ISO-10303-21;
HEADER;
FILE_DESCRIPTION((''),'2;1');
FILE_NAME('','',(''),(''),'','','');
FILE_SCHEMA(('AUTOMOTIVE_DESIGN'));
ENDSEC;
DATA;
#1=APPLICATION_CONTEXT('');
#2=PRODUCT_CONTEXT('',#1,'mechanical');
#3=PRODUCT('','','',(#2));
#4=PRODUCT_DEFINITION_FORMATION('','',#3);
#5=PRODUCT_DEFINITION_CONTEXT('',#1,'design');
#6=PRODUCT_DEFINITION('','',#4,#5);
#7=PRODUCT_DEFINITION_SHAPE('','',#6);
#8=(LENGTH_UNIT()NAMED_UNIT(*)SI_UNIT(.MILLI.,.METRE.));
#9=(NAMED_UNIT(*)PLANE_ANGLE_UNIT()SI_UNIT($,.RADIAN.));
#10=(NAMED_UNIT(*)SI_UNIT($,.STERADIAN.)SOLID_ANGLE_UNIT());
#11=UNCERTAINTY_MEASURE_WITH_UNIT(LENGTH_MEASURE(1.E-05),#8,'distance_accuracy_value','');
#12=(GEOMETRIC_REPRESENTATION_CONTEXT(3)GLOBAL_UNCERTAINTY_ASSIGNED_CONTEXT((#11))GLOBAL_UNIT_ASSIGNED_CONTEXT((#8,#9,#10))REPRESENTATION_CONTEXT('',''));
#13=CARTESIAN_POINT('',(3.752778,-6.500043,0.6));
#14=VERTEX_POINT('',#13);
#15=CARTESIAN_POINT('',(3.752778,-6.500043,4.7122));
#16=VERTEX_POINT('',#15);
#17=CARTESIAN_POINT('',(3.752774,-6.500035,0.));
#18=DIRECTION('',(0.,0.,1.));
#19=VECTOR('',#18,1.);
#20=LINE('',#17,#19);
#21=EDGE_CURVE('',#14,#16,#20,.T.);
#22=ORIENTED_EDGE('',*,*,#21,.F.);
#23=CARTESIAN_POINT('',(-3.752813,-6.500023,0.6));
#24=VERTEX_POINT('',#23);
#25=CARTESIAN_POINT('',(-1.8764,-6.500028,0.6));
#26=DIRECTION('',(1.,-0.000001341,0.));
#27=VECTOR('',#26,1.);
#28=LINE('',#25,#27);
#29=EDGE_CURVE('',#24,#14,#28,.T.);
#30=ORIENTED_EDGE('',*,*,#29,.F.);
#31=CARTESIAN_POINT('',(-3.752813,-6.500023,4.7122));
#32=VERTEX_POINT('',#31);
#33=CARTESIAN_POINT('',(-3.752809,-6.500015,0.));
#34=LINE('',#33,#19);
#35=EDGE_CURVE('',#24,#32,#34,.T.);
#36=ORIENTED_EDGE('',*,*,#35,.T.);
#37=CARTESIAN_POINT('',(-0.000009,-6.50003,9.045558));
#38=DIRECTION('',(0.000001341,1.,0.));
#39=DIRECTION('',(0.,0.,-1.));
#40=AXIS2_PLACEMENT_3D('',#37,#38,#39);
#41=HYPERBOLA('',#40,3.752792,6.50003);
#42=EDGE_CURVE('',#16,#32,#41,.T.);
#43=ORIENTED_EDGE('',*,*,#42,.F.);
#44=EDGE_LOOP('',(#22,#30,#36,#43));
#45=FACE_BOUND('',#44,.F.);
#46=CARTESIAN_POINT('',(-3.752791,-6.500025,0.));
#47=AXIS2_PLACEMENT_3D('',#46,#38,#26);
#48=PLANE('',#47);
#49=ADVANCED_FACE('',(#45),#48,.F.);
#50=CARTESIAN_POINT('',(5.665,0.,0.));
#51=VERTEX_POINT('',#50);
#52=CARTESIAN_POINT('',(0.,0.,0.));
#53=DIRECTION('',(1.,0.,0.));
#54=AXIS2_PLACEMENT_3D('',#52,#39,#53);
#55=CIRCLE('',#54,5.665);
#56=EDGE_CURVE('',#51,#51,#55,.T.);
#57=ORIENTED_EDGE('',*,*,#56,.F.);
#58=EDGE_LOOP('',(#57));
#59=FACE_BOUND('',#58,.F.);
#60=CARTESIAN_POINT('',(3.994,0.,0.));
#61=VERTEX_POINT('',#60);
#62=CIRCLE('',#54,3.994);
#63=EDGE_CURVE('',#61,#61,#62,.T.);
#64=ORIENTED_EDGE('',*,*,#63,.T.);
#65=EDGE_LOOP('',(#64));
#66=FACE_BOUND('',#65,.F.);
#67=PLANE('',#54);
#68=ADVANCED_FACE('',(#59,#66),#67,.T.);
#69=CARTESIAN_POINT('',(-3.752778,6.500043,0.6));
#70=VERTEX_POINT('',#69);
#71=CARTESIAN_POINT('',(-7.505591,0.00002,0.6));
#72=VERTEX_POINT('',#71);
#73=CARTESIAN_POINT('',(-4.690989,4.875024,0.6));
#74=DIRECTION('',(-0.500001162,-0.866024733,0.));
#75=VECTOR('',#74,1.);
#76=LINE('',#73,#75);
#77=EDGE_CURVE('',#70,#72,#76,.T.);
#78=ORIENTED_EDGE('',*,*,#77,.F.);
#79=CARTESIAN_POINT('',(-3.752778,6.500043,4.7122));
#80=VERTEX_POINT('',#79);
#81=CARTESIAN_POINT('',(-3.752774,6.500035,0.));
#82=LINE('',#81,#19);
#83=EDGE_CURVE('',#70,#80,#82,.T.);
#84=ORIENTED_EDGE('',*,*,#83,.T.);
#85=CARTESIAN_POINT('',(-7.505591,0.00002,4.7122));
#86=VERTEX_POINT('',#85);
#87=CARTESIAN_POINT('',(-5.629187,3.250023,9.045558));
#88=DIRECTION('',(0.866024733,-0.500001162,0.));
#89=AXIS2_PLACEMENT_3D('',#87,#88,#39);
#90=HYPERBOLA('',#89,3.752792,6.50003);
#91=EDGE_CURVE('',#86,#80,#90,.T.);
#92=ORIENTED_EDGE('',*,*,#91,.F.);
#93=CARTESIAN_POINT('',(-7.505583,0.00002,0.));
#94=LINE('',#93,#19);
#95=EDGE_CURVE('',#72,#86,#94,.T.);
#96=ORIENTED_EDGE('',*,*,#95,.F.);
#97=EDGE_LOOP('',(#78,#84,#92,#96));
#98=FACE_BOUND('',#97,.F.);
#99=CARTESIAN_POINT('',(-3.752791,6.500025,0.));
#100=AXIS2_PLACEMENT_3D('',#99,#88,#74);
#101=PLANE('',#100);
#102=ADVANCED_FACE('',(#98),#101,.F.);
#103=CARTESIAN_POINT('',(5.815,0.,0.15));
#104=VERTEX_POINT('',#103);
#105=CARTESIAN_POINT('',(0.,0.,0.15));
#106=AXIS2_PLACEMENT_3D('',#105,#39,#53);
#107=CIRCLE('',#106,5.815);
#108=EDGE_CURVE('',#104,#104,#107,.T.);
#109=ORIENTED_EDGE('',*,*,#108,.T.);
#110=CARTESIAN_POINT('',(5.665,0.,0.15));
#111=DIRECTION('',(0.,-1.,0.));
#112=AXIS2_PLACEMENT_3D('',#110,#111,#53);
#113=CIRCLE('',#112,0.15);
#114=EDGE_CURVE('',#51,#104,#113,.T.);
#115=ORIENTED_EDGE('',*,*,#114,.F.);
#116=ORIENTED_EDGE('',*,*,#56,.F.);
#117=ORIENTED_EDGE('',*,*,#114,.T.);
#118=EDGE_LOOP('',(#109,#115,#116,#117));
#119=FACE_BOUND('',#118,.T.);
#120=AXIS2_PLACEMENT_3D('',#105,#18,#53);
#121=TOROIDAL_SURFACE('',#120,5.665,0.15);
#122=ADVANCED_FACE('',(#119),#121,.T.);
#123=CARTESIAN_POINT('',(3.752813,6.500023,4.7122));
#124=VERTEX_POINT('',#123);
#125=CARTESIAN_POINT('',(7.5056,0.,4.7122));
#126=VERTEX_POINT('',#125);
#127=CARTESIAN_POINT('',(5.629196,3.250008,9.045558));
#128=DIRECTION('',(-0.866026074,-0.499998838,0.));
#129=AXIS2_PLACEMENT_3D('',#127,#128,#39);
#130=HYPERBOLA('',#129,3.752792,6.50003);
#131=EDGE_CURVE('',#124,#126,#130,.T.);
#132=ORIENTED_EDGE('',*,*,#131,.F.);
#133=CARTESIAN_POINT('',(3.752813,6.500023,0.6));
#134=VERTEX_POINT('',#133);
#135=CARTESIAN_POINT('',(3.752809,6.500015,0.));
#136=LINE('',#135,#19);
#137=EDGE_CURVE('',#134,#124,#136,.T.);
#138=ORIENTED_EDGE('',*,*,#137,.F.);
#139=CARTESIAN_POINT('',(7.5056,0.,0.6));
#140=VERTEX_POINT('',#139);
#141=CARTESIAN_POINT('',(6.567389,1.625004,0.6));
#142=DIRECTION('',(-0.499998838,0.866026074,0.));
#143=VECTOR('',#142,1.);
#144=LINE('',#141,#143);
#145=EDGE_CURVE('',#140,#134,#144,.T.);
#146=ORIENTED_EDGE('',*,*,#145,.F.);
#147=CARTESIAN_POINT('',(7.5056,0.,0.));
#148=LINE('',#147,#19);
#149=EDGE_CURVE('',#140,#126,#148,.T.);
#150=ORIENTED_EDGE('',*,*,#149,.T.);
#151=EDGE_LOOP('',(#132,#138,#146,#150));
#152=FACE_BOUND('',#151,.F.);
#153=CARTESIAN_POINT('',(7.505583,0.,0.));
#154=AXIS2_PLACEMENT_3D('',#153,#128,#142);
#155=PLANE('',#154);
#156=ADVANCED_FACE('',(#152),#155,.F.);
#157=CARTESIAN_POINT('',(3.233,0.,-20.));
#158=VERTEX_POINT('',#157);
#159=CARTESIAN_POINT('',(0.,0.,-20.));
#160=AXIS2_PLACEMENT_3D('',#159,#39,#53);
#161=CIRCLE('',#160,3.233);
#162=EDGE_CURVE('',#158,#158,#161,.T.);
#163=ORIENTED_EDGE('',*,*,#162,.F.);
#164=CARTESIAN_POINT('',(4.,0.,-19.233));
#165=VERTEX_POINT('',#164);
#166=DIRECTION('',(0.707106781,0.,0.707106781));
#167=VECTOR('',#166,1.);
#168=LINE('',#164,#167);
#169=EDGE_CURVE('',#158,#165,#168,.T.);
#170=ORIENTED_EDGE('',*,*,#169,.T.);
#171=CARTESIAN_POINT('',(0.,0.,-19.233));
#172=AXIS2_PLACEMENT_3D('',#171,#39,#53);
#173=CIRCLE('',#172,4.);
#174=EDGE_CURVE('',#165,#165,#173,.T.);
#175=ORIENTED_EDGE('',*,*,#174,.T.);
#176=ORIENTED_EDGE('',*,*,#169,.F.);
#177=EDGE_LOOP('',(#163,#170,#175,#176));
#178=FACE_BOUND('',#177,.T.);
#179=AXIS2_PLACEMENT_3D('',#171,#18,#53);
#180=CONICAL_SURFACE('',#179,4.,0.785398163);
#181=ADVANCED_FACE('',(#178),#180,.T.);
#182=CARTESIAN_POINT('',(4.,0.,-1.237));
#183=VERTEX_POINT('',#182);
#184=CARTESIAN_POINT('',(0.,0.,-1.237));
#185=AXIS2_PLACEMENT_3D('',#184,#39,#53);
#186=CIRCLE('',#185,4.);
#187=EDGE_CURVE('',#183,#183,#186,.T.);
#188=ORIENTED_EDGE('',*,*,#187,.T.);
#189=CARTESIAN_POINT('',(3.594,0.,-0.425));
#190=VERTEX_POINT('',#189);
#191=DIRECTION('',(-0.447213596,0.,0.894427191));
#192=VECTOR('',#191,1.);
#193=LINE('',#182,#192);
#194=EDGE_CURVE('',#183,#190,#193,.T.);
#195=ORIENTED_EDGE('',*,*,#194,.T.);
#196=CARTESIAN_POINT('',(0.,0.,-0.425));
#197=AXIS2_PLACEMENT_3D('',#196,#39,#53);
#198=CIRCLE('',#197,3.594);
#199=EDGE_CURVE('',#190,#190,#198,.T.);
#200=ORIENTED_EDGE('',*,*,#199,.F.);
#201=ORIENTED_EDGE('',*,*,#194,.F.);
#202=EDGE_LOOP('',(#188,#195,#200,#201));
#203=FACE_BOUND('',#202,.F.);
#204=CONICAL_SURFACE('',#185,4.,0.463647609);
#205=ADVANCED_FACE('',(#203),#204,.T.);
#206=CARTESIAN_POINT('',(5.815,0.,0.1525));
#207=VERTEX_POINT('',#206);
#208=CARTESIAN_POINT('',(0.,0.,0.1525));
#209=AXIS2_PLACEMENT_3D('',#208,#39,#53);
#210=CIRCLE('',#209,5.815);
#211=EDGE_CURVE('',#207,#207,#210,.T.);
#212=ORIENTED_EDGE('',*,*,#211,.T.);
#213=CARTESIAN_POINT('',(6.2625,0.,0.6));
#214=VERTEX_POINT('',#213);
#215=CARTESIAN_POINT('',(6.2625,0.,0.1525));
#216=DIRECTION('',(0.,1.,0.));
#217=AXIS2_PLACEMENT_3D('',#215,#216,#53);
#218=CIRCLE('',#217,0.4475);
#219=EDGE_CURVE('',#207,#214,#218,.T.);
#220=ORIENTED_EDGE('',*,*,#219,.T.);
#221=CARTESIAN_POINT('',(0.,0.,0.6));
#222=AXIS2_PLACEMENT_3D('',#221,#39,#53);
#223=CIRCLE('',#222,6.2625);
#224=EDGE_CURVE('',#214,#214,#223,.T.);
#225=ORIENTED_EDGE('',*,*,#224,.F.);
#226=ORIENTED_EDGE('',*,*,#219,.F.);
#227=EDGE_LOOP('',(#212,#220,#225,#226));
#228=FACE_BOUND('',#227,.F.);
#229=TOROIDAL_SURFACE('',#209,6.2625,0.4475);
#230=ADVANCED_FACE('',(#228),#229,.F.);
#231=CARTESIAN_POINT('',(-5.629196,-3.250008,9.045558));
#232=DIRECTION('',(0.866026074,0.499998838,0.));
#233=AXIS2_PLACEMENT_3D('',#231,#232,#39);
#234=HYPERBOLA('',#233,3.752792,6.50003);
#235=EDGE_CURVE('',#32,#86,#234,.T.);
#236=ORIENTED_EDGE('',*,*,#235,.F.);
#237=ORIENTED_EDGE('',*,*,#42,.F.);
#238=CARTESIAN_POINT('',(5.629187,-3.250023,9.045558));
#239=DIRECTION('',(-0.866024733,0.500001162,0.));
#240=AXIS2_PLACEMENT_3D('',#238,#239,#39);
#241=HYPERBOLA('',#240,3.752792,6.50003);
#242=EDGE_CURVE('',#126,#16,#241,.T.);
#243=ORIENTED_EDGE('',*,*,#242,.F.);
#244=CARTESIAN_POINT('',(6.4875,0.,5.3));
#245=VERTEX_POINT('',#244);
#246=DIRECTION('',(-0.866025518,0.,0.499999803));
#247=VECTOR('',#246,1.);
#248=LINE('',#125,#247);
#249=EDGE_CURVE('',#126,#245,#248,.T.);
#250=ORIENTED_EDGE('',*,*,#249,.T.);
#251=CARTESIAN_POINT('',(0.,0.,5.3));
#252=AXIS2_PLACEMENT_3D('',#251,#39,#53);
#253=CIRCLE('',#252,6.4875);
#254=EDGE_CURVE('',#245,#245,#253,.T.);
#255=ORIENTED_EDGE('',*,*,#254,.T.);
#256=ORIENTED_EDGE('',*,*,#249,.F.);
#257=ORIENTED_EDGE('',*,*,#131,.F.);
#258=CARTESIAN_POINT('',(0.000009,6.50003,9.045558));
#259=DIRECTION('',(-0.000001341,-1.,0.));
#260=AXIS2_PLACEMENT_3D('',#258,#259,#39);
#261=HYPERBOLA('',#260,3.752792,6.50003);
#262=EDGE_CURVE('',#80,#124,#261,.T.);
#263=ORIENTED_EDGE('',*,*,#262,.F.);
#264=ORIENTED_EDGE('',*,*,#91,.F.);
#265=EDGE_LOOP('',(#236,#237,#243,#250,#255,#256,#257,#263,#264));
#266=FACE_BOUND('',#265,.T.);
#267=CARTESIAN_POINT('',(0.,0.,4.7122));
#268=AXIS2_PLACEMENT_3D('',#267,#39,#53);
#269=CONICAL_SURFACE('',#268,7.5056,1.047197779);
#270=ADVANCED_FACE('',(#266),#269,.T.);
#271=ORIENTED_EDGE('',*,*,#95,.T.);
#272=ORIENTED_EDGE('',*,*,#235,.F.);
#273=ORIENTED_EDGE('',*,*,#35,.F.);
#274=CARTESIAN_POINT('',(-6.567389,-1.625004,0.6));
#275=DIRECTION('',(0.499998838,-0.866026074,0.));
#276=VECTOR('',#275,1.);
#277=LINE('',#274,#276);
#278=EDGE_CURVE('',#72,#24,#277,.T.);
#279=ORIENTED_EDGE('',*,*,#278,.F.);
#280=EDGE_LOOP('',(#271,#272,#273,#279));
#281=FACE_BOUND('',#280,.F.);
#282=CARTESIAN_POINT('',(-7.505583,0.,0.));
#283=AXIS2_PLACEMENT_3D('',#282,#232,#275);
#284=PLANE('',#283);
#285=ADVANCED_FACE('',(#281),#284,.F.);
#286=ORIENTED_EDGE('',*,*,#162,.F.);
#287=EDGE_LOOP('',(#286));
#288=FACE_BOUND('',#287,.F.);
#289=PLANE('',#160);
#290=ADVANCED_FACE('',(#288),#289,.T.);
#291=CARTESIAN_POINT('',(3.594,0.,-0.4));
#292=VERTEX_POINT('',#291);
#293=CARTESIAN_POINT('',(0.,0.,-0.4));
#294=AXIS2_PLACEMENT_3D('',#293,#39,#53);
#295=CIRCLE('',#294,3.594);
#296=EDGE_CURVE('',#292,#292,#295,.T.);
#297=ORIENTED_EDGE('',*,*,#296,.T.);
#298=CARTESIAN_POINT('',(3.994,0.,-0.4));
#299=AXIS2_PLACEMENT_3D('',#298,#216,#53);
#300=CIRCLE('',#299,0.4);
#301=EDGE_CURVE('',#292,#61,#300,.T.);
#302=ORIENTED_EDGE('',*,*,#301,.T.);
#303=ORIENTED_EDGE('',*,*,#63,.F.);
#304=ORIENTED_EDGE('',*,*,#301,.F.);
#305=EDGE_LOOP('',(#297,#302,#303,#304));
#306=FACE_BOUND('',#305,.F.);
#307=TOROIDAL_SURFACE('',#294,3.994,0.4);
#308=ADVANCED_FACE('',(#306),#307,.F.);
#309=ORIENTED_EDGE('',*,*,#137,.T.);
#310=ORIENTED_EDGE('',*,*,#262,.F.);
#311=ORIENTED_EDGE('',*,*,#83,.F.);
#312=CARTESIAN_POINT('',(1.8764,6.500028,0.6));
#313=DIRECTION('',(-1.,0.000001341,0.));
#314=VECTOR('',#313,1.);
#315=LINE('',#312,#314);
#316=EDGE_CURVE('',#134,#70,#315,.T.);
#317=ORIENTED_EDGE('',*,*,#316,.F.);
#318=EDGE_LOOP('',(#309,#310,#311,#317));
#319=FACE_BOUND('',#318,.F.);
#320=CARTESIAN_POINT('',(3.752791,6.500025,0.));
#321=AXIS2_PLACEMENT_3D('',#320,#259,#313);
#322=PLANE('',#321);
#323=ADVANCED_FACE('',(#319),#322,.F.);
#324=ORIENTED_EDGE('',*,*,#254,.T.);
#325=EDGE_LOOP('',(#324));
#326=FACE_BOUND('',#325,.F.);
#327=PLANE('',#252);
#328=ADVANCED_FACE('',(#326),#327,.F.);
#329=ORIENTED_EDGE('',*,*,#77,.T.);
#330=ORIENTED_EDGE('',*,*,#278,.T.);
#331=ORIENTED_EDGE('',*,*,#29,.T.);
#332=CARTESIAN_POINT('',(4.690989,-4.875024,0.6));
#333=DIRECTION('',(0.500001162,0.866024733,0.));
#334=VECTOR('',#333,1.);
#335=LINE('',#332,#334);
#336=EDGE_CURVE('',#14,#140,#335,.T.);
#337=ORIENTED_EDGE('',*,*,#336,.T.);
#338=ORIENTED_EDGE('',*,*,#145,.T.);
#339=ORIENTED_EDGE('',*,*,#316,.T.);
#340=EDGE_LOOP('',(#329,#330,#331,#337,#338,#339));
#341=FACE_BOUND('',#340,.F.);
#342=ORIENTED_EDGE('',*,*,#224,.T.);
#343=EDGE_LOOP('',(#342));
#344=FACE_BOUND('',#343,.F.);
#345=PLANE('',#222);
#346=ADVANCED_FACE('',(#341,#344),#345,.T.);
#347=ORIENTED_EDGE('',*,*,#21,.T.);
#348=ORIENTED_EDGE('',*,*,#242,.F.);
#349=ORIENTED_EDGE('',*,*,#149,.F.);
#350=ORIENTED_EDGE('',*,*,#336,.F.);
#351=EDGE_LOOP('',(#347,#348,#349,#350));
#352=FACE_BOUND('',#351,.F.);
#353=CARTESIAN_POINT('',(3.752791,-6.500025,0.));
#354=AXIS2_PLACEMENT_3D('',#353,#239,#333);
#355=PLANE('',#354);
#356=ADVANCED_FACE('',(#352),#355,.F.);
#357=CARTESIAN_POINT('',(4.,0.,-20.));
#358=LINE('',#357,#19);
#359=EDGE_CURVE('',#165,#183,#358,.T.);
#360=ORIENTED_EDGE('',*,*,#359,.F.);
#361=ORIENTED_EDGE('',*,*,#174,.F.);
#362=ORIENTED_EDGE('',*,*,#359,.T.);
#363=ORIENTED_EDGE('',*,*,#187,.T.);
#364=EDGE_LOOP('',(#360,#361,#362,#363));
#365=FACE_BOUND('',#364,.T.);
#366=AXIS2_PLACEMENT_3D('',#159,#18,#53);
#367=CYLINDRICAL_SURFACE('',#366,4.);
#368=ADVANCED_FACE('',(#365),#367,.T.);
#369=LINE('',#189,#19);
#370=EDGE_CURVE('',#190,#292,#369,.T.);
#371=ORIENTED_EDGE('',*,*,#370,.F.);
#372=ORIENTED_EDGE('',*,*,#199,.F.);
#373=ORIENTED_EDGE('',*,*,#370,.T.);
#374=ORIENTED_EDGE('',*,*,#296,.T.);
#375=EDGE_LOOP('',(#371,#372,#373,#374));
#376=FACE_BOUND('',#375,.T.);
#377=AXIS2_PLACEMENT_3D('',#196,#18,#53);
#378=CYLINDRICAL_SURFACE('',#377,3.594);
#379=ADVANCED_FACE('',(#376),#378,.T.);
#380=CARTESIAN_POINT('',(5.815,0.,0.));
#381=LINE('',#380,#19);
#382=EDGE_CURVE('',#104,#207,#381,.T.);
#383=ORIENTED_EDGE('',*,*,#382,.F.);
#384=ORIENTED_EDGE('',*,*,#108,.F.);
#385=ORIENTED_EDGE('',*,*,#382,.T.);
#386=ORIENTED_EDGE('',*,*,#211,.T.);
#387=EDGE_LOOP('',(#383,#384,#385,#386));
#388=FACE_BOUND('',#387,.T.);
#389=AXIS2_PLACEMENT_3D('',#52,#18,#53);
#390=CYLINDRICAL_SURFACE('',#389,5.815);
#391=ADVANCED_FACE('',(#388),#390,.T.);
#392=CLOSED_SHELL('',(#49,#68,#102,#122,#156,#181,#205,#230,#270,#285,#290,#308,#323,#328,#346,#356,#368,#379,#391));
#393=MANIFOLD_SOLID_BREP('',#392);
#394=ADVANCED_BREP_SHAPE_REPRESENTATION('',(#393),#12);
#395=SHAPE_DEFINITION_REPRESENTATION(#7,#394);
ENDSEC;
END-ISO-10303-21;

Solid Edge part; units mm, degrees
sketch "Sketch1" plane through (0, 0, 0) normal (0, -1, 0) x (1, 0, 0)
  line L0 (0, -20) -> (4, -20)
  line L1 (4, -20) -> (4, -1.237)
  line L2 (4, -1.237) -> (3.594, -0.425)
  line L3 (3.594, -0.425) -> (3.594, 0)
  line L4 (3.594, 0) -> (7.5056, 0)
  line L5 (7.5056, 0) -> (7.5056, 5.3)
  line L6 (7.5056, 5.3) -> (0, 5.3)
  dimension "D1" = 4
  dimension "D2" = 3.594
  dimension "D3" = 20
  dimension "D4" = 18.763
  dimension "D5" = 0.812
  dimension "D6" = 6.5
  dimension "D7" = 5.3
revolve "RevolvedProtrusion1" add sketch "Sketch1" angle 360 about axis through (0, 0, 6.4) along (0, 0, -1)
sketch "Sketch2" plane through (0, 0, 0) normal (0, 0, 1) x (1, 0, 0)
  line L0 (7.5056, 0) -> (3.7528, 6.5)
  arc A0 (3.7528, 6.5) -> (7.5056, 0) centre (0, 0) cw
  dimension "D1" = 6.5
extrude "ExtrudedCutout_1" cut sketch "Sketch2" along normal blind 5.3
pattern_circular "Pattern1" count 6 over 360 about axis through (0, 0, 5.3) along (0, 0, 1) of "ExtrudedCutout_1"
sketch "Sketch3" plane through (0, 0, 0) normal (0, -1, 0) x (1, 0, 0)
  line L0 (5.815, 0) -> (5.815, 0.6)
  line L1 (5.815, 0.6) -> (7.5056, 0.6)
  line L2 (7.5056, 0.6) -> (7.5056, 0)
  line L3 (7.5056, 0) -> (5.815, 0)
  line L4 (6.4875, 5.3) -> (7.5056, 5.3)
  line L5 (7.5056, 5.3) -> (7.5056, 4.7122)
  line L6 (7.5056, 4.7122) -> (6.4875, 5.3)
  dimension "D1" = 5.3
  dimension "D2" = 6.4875
  dimension "D3" = 7.5056
  dimension "D4" = 5.815
  dimension "D5" = 7.5056
  dimension "D6" = 0.6
revolve "RevolvedCutout_1" cut sketch "Sketch3" angle 360 about axis through (0, 0, 6.4) along (0, 0, -1)
cosmetic_thread "Thread_1" size "M8" thread depth 18.763
chamfer "Chamfer_1" distance 0.767 angle 45 1 edges at (-4, 0, -20) measured on face at (2.7467, 2.5867, -20)
fillet "Round_1" radius 0.4 1 edges at (-3.594, 0, 0)
fillet "Round_2" radius 0.15 1 edges at (-5.815, 0, 0)
fillet "Round_3" radius 0.4475 1 edges at (-5.815, 0, 0.6)
properties material "Steel"
